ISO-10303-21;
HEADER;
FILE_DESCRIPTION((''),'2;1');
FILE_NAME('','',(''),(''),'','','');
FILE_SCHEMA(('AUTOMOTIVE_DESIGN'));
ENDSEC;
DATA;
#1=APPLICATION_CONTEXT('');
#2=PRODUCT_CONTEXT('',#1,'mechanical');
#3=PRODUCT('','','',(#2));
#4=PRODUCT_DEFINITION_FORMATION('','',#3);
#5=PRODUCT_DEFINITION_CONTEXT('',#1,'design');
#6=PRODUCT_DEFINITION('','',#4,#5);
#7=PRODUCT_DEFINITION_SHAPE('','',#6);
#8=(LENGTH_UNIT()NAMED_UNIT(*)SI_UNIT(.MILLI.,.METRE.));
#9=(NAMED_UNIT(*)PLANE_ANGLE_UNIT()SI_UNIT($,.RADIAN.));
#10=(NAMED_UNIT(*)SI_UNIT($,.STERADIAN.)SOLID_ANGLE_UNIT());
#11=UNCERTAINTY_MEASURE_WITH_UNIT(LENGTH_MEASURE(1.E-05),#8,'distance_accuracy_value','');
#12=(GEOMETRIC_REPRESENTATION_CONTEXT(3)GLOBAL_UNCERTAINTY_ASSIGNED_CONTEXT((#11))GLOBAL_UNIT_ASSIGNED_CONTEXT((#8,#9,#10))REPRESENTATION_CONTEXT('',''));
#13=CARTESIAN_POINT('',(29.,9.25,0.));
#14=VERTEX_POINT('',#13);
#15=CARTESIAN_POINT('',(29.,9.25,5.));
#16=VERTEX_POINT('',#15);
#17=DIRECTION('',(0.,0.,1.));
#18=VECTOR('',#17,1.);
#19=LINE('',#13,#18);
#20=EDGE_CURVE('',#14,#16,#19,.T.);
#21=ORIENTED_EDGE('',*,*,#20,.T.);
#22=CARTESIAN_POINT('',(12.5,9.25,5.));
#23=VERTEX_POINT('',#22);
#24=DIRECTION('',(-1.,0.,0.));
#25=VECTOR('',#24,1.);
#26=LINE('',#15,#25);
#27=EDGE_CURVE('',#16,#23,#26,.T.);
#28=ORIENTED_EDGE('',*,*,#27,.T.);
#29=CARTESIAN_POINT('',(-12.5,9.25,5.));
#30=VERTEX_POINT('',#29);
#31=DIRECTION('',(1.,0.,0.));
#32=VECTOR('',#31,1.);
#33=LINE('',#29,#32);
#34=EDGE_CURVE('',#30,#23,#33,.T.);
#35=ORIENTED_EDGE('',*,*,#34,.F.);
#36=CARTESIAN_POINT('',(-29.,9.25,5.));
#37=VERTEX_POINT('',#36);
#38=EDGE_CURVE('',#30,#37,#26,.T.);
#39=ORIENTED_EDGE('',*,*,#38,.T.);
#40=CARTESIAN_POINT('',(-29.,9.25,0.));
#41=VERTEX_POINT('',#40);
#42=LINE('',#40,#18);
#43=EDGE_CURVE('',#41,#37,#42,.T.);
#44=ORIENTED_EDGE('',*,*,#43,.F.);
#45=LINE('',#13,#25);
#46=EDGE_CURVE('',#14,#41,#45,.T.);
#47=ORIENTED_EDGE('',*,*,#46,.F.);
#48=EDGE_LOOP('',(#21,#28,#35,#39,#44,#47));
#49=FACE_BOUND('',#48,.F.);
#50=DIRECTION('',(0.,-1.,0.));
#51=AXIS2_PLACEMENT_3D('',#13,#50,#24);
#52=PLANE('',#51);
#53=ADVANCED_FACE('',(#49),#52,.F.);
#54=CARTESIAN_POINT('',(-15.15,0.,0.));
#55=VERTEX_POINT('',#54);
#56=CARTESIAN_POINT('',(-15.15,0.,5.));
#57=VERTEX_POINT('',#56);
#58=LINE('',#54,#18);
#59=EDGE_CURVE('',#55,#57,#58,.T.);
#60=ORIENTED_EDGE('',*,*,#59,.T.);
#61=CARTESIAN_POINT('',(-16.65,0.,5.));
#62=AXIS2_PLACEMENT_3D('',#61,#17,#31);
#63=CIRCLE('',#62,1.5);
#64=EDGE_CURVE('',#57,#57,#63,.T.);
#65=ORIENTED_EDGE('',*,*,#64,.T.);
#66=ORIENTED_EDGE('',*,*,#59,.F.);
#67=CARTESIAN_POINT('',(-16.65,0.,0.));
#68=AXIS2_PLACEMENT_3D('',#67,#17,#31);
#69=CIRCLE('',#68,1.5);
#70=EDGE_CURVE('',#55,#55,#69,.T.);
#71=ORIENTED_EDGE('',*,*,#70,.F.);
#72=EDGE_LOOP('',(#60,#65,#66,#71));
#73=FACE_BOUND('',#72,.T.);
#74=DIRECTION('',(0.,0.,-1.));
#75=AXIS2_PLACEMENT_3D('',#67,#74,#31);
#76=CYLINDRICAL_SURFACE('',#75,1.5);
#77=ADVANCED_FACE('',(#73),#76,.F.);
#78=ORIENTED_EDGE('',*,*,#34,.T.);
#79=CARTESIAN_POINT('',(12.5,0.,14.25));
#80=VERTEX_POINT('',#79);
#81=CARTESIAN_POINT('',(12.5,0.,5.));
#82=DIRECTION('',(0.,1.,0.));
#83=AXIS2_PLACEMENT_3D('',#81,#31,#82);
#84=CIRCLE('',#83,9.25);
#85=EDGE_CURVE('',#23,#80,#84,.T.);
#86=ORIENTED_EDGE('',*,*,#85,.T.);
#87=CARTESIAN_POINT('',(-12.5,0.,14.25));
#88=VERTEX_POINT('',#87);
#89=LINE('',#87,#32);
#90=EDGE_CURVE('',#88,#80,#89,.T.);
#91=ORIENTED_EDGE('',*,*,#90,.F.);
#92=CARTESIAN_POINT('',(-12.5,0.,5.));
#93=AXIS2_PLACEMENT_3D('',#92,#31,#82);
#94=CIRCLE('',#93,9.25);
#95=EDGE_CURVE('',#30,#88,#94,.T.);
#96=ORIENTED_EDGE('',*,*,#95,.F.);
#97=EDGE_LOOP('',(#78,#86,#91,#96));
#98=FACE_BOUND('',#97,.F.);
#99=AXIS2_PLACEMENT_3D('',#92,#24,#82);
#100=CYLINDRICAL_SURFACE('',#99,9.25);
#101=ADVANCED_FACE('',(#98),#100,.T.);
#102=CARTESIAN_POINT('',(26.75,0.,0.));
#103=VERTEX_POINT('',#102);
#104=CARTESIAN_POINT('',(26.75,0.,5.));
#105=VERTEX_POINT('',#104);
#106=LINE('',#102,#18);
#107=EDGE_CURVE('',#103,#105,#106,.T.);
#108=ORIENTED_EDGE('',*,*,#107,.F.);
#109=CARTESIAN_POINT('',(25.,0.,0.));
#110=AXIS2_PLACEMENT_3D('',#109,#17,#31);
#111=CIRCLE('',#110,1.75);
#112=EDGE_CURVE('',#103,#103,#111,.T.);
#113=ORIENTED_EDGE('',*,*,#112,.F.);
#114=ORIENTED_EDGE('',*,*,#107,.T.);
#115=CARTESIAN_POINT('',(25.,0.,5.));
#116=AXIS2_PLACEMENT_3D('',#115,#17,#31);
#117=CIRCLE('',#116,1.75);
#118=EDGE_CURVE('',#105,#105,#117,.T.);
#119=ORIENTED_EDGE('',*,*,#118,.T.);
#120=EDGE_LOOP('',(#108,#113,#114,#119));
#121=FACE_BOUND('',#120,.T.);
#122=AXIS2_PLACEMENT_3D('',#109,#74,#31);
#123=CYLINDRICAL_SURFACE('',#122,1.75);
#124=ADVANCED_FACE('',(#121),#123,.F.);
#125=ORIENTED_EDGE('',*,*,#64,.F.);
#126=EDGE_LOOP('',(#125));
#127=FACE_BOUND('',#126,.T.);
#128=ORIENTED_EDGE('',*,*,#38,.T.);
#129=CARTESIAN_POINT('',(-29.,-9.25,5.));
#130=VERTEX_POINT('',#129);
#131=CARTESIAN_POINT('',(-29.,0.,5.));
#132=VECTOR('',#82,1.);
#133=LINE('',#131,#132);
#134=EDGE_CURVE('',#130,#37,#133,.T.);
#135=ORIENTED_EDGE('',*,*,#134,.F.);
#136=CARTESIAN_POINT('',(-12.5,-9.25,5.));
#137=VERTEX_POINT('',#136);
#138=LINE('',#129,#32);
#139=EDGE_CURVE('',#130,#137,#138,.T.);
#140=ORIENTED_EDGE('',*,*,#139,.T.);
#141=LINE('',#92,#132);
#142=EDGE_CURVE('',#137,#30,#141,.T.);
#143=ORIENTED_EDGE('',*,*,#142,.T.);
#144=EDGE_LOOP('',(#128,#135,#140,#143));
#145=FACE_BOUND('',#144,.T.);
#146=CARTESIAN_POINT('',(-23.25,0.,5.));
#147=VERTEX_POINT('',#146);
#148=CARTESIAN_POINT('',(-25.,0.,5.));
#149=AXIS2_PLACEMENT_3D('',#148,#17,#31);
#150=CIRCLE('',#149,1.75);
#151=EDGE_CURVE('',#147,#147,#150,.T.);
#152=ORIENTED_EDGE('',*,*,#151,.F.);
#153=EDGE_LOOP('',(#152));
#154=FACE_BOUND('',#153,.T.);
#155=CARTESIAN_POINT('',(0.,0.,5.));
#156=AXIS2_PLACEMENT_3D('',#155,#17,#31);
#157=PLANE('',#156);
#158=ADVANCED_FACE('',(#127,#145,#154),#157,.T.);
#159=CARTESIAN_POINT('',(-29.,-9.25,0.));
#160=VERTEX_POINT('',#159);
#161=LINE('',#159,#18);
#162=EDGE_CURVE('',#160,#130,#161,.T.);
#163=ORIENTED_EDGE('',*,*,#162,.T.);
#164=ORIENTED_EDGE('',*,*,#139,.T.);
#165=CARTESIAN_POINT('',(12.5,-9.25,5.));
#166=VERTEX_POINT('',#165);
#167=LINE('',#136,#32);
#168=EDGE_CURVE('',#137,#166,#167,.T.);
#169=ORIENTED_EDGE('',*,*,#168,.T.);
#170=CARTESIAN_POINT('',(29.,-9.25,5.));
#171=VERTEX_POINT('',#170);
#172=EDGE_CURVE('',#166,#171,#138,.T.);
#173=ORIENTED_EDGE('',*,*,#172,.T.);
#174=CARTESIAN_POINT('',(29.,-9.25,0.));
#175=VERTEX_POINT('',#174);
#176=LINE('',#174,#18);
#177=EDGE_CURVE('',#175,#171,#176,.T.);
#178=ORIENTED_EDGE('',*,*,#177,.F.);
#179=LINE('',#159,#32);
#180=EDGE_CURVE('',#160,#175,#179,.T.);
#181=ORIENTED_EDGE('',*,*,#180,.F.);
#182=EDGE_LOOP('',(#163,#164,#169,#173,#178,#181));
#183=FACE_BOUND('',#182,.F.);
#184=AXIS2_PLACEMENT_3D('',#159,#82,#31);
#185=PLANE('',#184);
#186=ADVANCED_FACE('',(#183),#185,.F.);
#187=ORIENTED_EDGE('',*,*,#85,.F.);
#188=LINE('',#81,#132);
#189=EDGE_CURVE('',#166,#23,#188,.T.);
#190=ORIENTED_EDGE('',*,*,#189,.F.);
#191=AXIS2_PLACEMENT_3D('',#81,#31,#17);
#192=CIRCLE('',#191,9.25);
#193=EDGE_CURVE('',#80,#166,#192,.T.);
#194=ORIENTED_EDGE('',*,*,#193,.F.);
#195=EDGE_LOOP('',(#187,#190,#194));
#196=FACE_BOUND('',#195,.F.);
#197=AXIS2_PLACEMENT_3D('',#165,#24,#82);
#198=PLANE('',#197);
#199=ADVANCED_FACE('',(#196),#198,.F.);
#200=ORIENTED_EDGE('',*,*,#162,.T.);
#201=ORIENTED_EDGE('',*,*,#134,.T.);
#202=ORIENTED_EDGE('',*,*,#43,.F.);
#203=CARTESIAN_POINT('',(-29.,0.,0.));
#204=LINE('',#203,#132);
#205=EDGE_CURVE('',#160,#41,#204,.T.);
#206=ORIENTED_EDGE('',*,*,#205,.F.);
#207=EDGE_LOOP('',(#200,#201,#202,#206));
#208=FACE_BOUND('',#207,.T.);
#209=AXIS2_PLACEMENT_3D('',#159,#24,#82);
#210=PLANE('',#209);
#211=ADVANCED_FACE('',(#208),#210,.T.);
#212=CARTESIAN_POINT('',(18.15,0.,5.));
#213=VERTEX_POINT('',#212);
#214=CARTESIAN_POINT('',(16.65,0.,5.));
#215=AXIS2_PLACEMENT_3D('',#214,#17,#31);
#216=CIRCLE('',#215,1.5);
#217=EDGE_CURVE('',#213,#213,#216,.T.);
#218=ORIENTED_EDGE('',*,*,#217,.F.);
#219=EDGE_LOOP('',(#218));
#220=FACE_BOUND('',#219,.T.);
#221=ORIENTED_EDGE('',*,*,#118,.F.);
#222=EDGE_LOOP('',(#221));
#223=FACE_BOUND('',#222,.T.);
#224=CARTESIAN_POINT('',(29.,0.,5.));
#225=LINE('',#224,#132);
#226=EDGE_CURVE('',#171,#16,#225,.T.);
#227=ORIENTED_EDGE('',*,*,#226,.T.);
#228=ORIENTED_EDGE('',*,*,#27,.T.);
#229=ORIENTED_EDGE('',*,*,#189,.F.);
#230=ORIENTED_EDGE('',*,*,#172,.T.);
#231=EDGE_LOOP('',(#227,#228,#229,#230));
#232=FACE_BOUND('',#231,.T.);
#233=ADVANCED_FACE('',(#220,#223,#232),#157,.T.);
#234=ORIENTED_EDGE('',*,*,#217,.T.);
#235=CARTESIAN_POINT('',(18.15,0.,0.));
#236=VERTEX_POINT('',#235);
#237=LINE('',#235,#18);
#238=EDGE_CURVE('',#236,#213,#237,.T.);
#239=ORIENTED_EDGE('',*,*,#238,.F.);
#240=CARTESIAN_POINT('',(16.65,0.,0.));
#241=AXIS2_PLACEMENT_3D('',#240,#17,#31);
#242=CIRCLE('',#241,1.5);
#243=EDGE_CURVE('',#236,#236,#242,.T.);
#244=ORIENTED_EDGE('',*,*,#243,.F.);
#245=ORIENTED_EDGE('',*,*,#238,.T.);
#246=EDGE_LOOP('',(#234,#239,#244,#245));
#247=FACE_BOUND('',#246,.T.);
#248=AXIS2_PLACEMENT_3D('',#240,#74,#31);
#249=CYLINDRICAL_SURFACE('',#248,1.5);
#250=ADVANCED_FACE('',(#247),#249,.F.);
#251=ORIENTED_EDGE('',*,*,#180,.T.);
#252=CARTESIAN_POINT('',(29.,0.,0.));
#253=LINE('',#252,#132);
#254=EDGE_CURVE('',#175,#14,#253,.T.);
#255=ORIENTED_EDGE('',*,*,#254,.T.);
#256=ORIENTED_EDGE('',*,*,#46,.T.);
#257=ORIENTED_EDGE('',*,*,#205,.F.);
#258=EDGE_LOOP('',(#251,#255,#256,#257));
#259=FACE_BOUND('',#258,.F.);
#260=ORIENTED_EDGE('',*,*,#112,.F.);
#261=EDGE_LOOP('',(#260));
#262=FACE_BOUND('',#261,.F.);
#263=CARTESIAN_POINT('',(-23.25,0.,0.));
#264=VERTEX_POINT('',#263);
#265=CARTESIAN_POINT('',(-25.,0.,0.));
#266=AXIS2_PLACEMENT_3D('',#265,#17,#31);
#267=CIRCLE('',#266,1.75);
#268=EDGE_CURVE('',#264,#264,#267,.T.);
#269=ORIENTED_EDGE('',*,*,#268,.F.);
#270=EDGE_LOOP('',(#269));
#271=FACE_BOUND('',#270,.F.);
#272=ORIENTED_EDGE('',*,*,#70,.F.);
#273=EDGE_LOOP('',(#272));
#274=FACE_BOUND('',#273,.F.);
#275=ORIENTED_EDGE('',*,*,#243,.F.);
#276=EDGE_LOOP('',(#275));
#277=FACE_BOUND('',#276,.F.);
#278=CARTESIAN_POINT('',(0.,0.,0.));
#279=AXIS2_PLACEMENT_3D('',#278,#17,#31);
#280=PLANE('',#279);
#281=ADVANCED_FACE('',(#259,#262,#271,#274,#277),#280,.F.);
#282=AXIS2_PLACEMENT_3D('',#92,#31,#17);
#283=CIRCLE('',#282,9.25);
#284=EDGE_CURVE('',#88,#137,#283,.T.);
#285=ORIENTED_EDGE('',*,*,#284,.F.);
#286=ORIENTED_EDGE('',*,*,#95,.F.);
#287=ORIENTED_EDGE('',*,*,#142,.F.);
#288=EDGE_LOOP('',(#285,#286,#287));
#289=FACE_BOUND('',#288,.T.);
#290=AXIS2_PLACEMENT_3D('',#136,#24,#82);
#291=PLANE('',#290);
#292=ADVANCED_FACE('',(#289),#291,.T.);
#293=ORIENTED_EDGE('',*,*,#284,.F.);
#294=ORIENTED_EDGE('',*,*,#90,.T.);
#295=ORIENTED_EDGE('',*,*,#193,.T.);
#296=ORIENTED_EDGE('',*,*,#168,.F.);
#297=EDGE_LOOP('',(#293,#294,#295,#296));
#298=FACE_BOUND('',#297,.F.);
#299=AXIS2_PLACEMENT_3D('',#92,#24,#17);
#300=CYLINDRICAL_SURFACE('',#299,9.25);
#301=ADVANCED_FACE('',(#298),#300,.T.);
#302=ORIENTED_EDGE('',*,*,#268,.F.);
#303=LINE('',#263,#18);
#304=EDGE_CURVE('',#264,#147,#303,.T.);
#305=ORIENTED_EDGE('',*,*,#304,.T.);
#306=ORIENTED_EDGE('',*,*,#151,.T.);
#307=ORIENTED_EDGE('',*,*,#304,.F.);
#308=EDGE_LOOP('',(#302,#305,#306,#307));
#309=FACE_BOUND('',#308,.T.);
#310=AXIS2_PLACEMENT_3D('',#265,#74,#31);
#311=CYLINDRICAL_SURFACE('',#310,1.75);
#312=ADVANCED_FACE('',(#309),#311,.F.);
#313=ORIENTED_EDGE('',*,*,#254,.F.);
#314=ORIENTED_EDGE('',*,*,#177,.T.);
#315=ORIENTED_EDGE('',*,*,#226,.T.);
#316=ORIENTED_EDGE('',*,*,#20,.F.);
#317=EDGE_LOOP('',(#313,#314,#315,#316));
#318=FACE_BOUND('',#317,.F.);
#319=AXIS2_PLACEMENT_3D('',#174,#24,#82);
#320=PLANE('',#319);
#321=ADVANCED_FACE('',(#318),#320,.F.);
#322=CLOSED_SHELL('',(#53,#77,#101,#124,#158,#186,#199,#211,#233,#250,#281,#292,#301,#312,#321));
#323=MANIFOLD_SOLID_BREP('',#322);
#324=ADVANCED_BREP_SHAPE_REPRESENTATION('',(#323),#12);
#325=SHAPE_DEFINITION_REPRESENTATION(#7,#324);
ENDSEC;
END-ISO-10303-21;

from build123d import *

# Parameters (mm, degrees)
F0_W     = 38
F0_H     = 18.5
F0_R     = 1.5
F0_W_2   = 10
F0_R_2   = 1.75
F1_DEPTH = 5
F2_W     = 25
F2_H     = 18.5
F3_DEPTH = 9.25
F5_DEPTH = 25


with BuildPart() as f1:
    # F0 (on Top) → F1 (new body)
    with BuildSketch(Plane.XY):
        Rectangle(F0_W, F0_H)
        with Locations((-16.65, 0)):
            Circle(F0_R, mode=Mode.SUBTRACT)
        with Locations((16.65, 0)):
            Circle(F0_R, mode=Mode.SUBTRACT)
        with Locations((24, 0)):
            Rectangle(F0_W_2, F0_H)
        with Locations((25, 0)):
            Circle(F0_R_2, mode=Mode.SUBTRACT)
        with Locations((-24, 0)):
            Rectangle(F0_W_2, F0_H)
        with Locations((-25, 0)):
            Circle(F0_R_2, mode=Mode.SUBTRACT)
    extrude(amount=F1_DEPTH)

    # F2 (on face) → F3 (join)
    with BuildSketch(Plane.XY.offset(5)):
        Rectangle(F2_W, F2_H)
    extrude(amount=F3_DEPTH)

    # F4 (on face) → F5 (cut)
    with BuildSketch(Plane(origin=(-12.5, 0, 0), x_dir=(0, -1, 0), z_dir=(-1, 0, 0))):
        with BuildLine():
            ThreePointArc((-9.25, 5), (-6.540737726, 11.540737726), (0, 14.25))
            Line((0, 14.25), (-9.25, 14.25))
            Line((-9.25, 14.25), (-9.25, 5))
        make_face()
        with BuildLine():
            ThreePointArc((0, 14.25), (6.540737726, 11.540737726), (9.25, 5))
            Line((9.25, 5), (9.25, 14.25))
            Line((9.25, 14.25), (0, 14.25))
        make_face()
    extrude(amount=-F5_DEPTH, mode=Mode.SUBTRACT)


solid = f1.part
